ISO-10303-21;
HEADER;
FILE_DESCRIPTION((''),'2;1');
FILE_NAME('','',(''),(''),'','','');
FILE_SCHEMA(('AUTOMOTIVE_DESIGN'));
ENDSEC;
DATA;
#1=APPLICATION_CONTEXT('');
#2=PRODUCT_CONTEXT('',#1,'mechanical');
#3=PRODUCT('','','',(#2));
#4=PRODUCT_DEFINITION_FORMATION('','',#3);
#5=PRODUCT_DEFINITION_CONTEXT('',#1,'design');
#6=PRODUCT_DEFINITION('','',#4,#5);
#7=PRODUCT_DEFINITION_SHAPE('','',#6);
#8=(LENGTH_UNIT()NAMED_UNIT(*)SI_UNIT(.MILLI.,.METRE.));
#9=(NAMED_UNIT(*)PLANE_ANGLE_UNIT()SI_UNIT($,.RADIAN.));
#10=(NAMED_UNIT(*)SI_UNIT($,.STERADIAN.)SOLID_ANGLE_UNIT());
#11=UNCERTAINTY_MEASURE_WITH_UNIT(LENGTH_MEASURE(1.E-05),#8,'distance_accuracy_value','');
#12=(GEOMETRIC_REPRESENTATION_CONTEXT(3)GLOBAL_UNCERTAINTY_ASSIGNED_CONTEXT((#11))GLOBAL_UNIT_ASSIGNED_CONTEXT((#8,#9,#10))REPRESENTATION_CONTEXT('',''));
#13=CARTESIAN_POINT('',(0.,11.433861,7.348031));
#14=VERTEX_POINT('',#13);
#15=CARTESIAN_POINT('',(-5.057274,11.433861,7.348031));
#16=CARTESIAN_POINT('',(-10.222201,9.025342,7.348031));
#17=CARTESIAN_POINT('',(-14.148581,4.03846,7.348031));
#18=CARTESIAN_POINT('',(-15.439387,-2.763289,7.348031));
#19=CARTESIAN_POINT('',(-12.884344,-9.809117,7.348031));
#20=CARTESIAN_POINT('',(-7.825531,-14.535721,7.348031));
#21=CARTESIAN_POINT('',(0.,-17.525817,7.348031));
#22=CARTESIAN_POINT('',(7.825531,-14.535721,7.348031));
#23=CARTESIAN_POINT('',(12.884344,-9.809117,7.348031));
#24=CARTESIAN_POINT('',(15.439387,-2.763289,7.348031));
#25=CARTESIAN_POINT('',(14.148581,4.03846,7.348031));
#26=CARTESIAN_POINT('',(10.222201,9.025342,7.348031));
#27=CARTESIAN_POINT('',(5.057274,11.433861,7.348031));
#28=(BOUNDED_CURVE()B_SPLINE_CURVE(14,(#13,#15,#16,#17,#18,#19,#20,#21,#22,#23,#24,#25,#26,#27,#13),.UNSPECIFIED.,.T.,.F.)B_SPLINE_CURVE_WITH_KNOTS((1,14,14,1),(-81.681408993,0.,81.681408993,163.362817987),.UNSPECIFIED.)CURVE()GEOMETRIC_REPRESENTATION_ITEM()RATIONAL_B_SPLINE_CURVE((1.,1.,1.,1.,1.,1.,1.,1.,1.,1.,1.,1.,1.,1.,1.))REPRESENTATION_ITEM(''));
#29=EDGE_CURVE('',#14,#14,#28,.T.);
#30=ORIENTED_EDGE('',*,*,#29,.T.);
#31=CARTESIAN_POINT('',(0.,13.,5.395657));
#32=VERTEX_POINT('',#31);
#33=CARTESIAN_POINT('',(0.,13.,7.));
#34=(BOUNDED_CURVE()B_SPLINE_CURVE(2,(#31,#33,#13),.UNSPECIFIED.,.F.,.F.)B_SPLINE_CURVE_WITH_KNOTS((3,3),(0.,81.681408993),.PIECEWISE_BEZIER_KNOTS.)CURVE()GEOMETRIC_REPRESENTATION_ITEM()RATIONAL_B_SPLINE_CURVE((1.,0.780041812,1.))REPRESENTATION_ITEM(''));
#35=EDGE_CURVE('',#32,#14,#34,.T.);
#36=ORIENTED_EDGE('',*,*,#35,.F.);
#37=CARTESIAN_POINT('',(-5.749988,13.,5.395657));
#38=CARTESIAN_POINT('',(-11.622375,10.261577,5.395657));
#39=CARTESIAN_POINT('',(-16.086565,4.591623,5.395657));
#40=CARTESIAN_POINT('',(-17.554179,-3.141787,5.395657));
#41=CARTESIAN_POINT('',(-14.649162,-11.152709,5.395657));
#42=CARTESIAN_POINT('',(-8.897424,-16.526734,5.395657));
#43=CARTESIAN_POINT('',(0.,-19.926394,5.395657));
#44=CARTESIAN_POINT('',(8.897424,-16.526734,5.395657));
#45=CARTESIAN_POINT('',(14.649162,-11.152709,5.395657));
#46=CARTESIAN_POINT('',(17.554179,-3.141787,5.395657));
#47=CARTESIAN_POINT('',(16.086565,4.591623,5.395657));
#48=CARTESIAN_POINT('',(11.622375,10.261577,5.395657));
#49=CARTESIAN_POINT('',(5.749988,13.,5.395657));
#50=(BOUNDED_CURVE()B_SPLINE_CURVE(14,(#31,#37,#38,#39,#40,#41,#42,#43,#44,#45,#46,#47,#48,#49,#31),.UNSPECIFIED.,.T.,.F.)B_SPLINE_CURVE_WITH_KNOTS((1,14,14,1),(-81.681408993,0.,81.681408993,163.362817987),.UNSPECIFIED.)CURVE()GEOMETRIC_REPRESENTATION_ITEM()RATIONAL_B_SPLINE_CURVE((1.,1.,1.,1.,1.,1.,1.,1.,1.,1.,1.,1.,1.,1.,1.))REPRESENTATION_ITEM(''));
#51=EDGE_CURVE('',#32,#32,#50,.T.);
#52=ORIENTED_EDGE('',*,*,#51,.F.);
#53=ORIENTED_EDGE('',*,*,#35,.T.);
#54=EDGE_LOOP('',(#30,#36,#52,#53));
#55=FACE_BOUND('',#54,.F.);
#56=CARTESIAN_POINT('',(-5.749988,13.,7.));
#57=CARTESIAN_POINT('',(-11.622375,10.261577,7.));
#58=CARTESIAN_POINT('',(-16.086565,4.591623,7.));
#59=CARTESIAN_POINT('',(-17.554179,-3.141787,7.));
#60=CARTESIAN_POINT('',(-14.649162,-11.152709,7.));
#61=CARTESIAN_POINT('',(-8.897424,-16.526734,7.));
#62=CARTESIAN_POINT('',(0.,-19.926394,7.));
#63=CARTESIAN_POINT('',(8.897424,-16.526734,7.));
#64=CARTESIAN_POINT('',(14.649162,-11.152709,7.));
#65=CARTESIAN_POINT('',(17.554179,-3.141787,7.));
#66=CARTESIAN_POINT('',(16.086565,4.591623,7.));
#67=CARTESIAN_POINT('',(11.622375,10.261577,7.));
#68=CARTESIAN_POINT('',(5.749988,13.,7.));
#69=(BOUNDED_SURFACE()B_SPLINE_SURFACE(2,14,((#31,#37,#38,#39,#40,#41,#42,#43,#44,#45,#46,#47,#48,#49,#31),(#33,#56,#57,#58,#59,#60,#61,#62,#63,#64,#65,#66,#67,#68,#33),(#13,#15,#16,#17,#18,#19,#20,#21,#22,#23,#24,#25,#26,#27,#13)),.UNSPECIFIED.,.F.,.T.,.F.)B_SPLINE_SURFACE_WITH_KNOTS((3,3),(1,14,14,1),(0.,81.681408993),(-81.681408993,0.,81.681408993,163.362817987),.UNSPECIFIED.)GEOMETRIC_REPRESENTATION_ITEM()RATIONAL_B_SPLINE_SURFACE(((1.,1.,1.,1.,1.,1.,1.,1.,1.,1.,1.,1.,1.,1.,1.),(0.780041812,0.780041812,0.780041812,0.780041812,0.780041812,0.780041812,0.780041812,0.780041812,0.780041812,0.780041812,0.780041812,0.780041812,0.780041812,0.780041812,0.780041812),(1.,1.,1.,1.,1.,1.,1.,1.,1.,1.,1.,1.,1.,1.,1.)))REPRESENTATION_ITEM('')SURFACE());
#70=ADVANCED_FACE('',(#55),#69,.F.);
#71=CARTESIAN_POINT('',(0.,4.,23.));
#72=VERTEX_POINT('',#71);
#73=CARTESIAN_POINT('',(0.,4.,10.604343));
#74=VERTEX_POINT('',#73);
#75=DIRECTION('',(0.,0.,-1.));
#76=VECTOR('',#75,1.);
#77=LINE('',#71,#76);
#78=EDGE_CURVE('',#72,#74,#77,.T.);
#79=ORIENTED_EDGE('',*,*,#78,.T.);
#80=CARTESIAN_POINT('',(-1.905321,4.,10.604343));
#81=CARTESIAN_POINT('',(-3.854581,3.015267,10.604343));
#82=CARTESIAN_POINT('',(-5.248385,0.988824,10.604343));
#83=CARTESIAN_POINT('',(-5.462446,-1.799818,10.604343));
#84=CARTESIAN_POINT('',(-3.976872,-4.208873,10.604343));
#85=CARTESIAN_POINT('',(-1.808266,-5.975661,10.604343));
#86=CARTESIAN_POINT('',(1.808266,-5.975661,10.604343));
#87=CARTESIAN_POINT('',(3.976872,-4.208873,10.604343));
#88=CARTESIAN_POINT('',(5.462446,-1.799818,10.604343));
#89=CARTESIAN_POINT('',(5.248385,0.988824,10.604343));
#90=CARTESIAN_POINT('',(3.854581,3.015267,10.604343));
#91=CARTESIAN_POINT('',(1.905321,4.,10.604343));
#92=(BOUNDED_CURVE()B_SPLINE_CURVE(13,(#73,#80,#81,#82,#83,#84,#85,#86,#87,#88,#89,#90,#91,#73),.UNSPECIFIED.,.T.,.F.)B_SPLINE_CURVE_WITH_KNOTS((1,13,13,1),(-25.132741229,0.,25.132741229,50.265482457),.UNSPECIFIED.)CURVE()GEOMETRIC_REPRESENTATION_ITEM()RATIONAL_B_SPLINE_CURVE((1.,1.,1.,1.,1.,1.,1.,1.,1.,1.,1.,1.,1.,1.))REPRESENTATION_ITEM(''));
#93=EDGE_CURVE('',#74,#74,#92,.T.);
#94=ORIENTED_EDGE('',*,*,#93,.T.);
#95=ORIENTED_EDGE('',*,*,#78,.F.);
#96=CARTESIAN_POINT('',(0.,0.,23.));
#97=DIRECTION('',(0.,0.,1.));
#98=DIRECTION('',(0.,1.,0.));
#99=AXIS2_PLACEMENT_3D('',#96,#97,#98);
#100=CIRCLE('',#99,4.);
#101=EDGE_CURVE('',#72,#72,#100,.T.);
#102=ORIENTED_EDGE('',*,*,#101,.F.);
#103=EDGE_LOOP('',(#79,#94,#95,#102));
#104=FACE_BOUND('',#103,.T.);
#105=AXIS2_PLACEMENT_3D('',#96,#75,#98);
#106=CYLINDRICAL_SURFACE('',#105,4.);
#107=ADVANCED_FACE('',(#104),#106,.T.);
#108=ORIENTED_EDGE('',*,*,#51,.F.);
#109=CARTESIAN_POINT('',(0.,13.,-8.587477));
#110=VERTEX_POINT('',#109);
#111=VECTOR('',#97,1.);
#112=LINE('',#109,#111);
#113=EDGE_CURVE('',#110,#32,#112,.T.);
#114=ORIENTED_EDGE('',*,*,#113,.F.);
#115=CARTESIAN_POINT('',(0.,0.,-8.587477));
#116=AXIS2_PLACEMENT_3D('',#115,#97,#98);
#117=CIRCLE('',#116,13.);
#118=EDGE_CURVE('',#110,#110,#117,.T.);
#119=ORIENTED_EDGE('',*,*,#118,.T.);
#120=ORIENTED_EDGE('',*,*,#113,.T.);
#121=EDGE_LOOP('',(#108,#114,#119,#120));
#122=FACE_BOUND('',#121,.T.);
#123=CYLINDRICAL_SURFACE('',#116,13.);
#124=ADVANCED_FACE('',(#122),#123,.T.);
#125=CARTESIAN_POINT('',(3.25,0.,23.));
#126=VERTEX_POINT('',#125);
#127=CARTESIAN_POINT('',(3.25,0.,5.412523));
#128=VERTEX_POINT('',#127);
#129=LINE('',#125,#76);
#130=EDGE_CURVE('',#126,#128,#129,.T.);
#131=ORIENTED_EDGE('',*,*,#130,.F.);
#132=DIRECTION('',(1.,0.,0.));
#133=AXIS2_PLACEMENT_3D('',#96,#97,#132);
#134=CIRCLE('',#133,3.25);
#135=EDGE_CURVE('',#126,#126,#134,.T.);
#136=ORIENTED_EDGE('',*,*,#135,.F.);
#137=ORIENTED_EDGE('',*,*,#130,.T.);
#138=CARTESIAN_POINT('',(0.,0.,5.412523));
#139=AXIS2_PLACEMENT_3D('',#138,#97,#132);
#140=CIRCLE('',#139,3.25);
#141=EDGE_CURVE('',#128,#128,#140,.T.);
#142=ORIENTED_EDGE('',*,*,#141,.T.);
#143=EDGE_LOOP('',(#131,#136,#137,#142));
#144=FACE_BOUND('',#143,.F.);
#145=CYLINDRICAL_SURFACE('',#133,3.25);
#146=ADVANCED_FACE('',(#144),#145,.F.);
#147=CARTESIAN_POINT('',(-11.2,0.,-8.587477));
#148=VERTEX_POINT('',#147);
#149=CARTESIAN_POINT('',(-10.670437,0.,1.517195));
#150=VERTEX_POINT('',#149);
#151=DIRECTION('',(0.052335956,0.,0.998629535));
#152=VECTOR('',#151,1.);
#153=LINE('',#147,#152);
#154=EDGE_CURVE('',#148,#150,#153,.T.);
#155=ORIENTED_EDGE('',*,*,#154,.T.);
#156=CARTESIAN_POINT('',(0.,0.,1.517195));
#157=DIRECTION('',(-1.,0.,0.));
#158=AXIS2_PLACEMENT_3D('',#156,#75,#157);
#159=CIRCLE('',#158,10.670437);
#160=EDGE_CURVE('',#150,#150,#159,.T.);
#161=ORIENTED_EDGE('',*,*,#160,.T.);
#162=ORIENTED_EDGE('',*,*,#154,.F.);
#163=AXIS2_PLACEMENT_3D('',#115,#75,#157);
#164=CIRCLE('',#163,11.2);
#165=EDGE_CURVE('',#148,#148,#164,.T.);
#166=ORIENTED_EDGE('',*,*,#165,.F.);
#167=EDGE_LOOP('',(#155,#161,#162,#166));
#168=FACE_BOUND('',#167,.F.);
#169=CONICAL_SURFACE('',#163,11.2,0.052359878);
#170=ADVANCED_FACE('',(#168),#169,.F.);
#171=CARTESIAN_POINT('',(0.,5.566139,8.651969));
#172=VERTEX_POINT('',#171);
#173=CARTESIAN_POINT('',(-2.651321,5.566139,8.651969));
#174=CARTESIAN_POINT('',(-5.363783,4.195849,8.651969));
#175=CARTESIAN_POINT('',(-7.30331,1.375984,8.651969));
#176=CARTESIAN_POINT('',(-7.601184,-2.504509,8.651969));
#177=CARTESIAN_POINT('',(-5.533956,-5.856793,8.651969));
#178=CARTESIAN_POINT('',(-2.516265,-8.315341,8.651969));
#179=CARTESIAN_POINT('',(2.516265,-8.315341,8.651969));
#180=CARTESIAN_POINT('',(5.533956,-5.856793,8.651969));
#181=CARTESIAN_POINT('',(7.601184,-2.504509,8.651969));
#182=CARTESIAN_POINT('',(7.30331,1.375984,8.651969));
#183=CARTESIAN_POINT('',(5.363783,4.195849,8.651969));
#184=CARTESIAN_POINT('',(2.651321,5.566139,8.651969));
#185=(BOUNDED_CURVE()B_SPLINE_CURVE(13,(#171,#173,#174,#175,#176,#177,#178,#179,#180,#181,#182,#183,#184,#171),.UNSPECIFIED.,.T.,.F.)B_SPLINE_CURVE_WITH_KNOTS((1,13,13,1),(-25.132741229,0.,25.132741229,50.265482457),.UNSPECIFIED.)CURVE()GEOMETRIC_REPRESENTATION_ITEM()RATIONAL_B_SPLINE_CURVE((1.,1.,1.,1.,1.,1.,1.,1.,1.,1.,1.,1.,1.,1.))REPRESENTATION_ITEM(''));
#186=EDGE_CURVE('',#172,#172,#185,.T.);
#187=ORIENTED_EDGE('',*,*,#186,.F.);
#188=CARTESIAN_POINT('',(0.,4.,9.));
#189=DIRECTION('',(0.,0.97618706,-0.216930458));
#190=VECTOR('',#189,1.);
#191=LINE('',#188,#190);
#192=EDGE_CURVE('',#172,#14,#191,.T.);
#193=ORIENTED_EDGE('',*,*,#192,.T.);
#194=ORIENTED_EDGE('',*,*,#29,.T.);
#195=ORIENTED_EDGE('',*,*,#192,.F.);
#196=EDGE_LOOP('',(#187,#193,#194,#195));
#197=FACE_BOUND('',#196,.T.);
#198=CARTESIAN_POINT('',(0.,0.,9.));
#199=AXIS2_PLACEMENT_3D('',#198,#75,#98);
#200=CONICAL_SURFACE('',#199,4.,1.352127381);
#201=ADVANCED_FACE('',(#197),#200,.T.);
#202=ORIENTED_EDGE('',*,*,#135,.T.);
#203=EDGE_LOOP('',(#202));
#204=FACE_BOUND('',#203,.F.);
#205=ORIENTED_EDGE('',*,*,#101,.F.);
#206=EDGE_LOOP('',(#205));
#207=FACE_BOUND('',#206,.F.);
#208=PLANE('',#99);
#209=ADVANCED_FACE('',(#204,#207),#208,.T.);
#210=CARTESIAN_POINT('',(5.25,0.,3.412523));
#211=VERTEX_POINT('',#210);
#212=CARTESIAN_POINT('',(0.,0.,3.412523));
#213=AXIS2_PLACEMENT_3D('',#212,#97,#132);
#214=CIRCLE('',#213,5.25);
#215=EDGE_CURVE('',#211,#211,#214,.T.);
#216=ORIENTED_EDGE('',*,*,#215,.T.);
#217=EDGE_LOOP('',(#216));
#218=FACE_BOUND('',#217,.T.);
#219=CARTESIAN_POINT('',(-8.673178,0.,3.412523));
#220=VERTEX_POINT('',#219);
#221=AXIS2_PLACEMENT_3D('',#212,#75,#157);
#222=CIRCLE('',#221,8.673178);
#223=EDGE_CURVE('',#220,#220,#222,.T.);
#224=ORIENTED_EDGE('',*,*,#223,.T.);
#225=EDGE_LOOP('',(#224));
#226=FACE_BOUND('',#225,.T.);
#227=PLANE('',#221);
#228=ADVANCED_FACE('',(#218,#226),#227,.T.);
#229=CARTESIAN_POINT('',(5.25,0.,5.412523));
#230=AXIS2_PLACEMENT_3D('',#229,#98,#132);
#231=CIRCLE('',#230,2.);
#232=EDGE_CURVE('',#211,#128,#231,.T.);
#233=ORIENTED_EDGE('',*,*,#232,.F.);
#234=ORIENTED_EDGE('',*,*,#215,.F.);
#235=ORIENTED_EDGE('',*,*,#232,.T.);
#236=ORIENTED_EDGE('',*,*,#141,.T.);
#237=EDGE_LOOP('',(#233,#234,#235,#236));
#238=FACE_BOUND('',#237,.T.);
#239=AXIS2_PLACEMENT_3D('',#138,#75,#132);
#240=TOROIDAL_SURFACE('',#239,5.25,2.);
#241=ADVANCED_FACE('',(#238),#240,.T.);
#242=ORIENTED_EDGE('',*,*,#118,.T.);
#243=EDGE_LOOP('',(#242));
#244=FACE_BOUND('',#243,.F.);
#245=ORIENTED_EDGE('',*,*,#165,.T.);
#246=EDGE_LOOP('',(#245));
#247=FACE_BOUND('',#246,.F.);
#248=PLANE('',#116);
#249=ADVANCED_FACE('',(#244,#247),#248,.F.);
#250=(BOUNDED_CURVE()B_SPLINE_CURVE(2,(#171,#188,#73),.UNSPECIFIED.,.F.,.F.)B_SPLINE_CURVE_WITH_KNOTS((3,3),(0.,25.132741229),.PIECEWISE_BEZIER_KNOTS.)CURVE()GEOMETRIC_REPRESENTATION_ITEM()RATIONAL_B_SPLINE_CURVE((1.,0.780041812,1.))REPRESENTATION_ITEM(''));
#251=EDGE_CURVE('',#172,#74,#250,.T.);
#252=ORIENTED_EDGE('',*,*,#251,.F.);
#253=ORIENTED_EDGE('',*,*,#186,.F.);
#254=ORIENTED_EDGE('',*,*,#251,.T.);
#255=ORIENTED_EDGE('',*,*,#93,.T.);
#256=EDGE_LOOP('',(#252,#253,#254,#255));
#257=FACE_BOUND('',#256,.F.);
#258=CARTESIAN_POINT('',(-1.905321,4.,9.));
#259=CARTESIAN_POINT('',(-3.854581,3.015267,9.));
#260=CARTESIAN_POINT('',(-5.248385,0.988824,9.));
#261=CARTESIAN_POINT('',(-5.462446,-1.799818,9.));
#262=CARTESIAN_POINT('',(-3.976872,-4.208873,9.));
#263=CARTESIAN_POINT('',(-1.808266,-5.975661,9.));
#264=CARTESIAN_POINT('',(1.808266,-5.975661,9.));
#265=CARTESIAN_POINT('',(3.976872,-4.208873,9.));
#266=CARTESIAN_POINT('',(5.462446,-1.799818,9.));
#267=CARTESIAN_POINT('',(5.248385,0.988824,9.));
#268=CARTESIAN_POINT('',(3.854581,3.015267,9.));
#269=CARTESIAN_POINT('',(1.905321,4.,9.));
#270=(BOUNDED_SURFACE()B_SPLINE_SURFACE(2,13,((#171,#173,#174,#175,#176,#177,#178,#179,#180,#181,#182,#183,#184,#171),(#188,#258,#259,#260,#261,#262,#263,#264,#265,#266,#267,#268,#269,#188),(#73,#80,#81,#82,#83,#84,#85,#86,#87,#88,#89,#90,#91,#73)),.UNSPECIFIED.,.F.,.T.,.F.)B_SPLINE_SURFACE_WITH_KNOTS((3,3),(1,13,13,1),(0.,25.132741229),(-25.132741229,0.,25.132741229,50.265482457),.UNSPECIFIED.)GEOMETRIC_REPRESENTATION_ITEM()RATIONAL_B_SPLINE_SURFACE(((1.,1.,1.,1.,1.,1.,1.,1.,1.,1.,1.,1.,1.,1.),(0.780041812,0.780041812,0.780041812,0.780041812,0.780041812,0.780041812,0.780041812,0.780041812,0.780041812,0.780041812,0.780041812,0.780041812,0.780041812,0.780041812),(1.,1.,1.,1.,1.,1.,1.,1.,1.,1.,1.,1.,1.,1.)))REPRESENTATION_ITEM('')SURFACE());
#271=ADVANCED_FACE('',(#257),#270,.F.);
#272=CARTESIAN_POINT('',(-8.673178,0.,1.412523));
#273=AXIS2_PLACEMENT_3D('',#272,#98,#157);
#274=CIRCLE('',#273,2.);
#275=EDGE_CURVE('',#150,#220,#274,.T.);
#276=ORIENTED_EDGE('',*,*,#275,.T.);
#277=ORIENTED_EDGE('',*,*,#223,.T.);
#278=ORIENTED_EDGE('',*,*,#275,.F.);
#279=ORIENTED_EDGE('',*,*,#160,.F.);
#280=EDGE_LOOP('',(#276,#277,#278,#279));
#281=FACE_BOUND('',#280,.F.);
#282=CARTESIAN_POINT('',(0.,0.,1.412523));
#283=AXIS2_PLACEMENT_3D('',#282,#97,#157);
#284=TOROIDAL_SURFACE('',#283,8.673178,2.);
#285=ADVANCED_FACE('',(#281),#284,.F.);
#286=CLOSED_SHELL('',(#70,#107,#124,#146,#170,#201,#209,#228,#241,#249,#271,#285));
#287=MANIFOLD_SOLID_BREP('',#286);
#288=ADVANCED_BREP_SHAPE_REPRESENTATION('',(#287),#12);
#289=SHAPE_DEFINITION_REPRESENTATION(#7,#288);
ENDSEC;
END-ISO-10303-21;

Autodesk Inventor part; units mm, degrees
ref_plane "YZ Plane" through (0, 0, 0) normal (1, 0, 0) x (0, 1, 0)
ref_plane "XZ Plane" through (0, 0, 0) normal (0, 1, 0) x (-1, 0, 0)
ref_plane "XY Plane" through (0, 0, 0) normal (0, 0, 1) x (1, 0, 0)
sketch "Sketch1" plane through (0, 0, 0) normal (1, 0, 0) x (0, 1, 0)
  line L0 (-11, 0) -> (11, 0)
  line L1 (13, -8.587477) -> (0, -8.587477)
  line L2 (0, -8.587477) -> (0, 9)
  line L3 (0, 9) -> (4, 9)
  line L4 (4, 9) -> (11, 0) construction
  line L5 (4, 9) -> (13, 7)
  line L6 (13, 7) -> (13, 2)
  line L7 (13, 2) -> (13, 0)
  line L8 (4, 9) -> (0, 9)
  line L9 (0, 9) -> (0, 23)
  line L10 (0, 23) -> (4, 23)
  line L11 (4, 23) -> (4, 9)
  line L12 (13, -8.587477) -> (13, 0)
  point P0 (0, 0)
  dimension "d12" = 4
  dimension "d13" = 0
  dimension "d15" = 13
  dimension "d16" = 0
  dimension "d17" = 2
  dimension "d19" = 5
  dimension "d20" = 14
revolve "Revolution1" add sketch "Sketch1" angle 360 about axis through (0, 0, -8.587477) along (0, 0, 1)
sketch "Sketch4" plane through (0, 0, 23) normal (0, 0, 1) x (1, 0, 0)
  circle A0 centre (0, 0) radius 1.479649
  circle A1 centre (0, 0) radius 4
  circle A2 centre (0, 0) radius 3.25
  point P0 (0, 0)
  dimension "d21" = 6.5
extrude "Extrusion2" cut sketch "Sketch4" against normal through all contours A0 | A2
sketch "Sketch5" plane through (0, 0, -8.587477) normal (0, 0, -1) x (-1, 0, 0)
  circle A0 centre (0, 0) radius 11.938351
  circle A1 centre (0, 0) radius 11.2
  circle A2 centre (0, 0) radius 11
  point P0 (0, 0)
  dimension "d28" = 0.2
sketch "Sketch5 outline for Extrusion3" plane through (0, 0, -8.587477) normal (0, 0, -1) x (-1, 0, 0)
  circle A0 centre (0, 0) radius 11.2
extrude "Extrusion3" cut sketch "Sketch5 outline for Extrusion3" against normal blind 12 draft -3
fillet "Fillet2" radius 2 4 edges at (0, -4, 9) (0, -13, 7) (10.5711, 0, 3.4125) (-3.25, 0, 3.4125)
properties part number "01_Connector_T"
